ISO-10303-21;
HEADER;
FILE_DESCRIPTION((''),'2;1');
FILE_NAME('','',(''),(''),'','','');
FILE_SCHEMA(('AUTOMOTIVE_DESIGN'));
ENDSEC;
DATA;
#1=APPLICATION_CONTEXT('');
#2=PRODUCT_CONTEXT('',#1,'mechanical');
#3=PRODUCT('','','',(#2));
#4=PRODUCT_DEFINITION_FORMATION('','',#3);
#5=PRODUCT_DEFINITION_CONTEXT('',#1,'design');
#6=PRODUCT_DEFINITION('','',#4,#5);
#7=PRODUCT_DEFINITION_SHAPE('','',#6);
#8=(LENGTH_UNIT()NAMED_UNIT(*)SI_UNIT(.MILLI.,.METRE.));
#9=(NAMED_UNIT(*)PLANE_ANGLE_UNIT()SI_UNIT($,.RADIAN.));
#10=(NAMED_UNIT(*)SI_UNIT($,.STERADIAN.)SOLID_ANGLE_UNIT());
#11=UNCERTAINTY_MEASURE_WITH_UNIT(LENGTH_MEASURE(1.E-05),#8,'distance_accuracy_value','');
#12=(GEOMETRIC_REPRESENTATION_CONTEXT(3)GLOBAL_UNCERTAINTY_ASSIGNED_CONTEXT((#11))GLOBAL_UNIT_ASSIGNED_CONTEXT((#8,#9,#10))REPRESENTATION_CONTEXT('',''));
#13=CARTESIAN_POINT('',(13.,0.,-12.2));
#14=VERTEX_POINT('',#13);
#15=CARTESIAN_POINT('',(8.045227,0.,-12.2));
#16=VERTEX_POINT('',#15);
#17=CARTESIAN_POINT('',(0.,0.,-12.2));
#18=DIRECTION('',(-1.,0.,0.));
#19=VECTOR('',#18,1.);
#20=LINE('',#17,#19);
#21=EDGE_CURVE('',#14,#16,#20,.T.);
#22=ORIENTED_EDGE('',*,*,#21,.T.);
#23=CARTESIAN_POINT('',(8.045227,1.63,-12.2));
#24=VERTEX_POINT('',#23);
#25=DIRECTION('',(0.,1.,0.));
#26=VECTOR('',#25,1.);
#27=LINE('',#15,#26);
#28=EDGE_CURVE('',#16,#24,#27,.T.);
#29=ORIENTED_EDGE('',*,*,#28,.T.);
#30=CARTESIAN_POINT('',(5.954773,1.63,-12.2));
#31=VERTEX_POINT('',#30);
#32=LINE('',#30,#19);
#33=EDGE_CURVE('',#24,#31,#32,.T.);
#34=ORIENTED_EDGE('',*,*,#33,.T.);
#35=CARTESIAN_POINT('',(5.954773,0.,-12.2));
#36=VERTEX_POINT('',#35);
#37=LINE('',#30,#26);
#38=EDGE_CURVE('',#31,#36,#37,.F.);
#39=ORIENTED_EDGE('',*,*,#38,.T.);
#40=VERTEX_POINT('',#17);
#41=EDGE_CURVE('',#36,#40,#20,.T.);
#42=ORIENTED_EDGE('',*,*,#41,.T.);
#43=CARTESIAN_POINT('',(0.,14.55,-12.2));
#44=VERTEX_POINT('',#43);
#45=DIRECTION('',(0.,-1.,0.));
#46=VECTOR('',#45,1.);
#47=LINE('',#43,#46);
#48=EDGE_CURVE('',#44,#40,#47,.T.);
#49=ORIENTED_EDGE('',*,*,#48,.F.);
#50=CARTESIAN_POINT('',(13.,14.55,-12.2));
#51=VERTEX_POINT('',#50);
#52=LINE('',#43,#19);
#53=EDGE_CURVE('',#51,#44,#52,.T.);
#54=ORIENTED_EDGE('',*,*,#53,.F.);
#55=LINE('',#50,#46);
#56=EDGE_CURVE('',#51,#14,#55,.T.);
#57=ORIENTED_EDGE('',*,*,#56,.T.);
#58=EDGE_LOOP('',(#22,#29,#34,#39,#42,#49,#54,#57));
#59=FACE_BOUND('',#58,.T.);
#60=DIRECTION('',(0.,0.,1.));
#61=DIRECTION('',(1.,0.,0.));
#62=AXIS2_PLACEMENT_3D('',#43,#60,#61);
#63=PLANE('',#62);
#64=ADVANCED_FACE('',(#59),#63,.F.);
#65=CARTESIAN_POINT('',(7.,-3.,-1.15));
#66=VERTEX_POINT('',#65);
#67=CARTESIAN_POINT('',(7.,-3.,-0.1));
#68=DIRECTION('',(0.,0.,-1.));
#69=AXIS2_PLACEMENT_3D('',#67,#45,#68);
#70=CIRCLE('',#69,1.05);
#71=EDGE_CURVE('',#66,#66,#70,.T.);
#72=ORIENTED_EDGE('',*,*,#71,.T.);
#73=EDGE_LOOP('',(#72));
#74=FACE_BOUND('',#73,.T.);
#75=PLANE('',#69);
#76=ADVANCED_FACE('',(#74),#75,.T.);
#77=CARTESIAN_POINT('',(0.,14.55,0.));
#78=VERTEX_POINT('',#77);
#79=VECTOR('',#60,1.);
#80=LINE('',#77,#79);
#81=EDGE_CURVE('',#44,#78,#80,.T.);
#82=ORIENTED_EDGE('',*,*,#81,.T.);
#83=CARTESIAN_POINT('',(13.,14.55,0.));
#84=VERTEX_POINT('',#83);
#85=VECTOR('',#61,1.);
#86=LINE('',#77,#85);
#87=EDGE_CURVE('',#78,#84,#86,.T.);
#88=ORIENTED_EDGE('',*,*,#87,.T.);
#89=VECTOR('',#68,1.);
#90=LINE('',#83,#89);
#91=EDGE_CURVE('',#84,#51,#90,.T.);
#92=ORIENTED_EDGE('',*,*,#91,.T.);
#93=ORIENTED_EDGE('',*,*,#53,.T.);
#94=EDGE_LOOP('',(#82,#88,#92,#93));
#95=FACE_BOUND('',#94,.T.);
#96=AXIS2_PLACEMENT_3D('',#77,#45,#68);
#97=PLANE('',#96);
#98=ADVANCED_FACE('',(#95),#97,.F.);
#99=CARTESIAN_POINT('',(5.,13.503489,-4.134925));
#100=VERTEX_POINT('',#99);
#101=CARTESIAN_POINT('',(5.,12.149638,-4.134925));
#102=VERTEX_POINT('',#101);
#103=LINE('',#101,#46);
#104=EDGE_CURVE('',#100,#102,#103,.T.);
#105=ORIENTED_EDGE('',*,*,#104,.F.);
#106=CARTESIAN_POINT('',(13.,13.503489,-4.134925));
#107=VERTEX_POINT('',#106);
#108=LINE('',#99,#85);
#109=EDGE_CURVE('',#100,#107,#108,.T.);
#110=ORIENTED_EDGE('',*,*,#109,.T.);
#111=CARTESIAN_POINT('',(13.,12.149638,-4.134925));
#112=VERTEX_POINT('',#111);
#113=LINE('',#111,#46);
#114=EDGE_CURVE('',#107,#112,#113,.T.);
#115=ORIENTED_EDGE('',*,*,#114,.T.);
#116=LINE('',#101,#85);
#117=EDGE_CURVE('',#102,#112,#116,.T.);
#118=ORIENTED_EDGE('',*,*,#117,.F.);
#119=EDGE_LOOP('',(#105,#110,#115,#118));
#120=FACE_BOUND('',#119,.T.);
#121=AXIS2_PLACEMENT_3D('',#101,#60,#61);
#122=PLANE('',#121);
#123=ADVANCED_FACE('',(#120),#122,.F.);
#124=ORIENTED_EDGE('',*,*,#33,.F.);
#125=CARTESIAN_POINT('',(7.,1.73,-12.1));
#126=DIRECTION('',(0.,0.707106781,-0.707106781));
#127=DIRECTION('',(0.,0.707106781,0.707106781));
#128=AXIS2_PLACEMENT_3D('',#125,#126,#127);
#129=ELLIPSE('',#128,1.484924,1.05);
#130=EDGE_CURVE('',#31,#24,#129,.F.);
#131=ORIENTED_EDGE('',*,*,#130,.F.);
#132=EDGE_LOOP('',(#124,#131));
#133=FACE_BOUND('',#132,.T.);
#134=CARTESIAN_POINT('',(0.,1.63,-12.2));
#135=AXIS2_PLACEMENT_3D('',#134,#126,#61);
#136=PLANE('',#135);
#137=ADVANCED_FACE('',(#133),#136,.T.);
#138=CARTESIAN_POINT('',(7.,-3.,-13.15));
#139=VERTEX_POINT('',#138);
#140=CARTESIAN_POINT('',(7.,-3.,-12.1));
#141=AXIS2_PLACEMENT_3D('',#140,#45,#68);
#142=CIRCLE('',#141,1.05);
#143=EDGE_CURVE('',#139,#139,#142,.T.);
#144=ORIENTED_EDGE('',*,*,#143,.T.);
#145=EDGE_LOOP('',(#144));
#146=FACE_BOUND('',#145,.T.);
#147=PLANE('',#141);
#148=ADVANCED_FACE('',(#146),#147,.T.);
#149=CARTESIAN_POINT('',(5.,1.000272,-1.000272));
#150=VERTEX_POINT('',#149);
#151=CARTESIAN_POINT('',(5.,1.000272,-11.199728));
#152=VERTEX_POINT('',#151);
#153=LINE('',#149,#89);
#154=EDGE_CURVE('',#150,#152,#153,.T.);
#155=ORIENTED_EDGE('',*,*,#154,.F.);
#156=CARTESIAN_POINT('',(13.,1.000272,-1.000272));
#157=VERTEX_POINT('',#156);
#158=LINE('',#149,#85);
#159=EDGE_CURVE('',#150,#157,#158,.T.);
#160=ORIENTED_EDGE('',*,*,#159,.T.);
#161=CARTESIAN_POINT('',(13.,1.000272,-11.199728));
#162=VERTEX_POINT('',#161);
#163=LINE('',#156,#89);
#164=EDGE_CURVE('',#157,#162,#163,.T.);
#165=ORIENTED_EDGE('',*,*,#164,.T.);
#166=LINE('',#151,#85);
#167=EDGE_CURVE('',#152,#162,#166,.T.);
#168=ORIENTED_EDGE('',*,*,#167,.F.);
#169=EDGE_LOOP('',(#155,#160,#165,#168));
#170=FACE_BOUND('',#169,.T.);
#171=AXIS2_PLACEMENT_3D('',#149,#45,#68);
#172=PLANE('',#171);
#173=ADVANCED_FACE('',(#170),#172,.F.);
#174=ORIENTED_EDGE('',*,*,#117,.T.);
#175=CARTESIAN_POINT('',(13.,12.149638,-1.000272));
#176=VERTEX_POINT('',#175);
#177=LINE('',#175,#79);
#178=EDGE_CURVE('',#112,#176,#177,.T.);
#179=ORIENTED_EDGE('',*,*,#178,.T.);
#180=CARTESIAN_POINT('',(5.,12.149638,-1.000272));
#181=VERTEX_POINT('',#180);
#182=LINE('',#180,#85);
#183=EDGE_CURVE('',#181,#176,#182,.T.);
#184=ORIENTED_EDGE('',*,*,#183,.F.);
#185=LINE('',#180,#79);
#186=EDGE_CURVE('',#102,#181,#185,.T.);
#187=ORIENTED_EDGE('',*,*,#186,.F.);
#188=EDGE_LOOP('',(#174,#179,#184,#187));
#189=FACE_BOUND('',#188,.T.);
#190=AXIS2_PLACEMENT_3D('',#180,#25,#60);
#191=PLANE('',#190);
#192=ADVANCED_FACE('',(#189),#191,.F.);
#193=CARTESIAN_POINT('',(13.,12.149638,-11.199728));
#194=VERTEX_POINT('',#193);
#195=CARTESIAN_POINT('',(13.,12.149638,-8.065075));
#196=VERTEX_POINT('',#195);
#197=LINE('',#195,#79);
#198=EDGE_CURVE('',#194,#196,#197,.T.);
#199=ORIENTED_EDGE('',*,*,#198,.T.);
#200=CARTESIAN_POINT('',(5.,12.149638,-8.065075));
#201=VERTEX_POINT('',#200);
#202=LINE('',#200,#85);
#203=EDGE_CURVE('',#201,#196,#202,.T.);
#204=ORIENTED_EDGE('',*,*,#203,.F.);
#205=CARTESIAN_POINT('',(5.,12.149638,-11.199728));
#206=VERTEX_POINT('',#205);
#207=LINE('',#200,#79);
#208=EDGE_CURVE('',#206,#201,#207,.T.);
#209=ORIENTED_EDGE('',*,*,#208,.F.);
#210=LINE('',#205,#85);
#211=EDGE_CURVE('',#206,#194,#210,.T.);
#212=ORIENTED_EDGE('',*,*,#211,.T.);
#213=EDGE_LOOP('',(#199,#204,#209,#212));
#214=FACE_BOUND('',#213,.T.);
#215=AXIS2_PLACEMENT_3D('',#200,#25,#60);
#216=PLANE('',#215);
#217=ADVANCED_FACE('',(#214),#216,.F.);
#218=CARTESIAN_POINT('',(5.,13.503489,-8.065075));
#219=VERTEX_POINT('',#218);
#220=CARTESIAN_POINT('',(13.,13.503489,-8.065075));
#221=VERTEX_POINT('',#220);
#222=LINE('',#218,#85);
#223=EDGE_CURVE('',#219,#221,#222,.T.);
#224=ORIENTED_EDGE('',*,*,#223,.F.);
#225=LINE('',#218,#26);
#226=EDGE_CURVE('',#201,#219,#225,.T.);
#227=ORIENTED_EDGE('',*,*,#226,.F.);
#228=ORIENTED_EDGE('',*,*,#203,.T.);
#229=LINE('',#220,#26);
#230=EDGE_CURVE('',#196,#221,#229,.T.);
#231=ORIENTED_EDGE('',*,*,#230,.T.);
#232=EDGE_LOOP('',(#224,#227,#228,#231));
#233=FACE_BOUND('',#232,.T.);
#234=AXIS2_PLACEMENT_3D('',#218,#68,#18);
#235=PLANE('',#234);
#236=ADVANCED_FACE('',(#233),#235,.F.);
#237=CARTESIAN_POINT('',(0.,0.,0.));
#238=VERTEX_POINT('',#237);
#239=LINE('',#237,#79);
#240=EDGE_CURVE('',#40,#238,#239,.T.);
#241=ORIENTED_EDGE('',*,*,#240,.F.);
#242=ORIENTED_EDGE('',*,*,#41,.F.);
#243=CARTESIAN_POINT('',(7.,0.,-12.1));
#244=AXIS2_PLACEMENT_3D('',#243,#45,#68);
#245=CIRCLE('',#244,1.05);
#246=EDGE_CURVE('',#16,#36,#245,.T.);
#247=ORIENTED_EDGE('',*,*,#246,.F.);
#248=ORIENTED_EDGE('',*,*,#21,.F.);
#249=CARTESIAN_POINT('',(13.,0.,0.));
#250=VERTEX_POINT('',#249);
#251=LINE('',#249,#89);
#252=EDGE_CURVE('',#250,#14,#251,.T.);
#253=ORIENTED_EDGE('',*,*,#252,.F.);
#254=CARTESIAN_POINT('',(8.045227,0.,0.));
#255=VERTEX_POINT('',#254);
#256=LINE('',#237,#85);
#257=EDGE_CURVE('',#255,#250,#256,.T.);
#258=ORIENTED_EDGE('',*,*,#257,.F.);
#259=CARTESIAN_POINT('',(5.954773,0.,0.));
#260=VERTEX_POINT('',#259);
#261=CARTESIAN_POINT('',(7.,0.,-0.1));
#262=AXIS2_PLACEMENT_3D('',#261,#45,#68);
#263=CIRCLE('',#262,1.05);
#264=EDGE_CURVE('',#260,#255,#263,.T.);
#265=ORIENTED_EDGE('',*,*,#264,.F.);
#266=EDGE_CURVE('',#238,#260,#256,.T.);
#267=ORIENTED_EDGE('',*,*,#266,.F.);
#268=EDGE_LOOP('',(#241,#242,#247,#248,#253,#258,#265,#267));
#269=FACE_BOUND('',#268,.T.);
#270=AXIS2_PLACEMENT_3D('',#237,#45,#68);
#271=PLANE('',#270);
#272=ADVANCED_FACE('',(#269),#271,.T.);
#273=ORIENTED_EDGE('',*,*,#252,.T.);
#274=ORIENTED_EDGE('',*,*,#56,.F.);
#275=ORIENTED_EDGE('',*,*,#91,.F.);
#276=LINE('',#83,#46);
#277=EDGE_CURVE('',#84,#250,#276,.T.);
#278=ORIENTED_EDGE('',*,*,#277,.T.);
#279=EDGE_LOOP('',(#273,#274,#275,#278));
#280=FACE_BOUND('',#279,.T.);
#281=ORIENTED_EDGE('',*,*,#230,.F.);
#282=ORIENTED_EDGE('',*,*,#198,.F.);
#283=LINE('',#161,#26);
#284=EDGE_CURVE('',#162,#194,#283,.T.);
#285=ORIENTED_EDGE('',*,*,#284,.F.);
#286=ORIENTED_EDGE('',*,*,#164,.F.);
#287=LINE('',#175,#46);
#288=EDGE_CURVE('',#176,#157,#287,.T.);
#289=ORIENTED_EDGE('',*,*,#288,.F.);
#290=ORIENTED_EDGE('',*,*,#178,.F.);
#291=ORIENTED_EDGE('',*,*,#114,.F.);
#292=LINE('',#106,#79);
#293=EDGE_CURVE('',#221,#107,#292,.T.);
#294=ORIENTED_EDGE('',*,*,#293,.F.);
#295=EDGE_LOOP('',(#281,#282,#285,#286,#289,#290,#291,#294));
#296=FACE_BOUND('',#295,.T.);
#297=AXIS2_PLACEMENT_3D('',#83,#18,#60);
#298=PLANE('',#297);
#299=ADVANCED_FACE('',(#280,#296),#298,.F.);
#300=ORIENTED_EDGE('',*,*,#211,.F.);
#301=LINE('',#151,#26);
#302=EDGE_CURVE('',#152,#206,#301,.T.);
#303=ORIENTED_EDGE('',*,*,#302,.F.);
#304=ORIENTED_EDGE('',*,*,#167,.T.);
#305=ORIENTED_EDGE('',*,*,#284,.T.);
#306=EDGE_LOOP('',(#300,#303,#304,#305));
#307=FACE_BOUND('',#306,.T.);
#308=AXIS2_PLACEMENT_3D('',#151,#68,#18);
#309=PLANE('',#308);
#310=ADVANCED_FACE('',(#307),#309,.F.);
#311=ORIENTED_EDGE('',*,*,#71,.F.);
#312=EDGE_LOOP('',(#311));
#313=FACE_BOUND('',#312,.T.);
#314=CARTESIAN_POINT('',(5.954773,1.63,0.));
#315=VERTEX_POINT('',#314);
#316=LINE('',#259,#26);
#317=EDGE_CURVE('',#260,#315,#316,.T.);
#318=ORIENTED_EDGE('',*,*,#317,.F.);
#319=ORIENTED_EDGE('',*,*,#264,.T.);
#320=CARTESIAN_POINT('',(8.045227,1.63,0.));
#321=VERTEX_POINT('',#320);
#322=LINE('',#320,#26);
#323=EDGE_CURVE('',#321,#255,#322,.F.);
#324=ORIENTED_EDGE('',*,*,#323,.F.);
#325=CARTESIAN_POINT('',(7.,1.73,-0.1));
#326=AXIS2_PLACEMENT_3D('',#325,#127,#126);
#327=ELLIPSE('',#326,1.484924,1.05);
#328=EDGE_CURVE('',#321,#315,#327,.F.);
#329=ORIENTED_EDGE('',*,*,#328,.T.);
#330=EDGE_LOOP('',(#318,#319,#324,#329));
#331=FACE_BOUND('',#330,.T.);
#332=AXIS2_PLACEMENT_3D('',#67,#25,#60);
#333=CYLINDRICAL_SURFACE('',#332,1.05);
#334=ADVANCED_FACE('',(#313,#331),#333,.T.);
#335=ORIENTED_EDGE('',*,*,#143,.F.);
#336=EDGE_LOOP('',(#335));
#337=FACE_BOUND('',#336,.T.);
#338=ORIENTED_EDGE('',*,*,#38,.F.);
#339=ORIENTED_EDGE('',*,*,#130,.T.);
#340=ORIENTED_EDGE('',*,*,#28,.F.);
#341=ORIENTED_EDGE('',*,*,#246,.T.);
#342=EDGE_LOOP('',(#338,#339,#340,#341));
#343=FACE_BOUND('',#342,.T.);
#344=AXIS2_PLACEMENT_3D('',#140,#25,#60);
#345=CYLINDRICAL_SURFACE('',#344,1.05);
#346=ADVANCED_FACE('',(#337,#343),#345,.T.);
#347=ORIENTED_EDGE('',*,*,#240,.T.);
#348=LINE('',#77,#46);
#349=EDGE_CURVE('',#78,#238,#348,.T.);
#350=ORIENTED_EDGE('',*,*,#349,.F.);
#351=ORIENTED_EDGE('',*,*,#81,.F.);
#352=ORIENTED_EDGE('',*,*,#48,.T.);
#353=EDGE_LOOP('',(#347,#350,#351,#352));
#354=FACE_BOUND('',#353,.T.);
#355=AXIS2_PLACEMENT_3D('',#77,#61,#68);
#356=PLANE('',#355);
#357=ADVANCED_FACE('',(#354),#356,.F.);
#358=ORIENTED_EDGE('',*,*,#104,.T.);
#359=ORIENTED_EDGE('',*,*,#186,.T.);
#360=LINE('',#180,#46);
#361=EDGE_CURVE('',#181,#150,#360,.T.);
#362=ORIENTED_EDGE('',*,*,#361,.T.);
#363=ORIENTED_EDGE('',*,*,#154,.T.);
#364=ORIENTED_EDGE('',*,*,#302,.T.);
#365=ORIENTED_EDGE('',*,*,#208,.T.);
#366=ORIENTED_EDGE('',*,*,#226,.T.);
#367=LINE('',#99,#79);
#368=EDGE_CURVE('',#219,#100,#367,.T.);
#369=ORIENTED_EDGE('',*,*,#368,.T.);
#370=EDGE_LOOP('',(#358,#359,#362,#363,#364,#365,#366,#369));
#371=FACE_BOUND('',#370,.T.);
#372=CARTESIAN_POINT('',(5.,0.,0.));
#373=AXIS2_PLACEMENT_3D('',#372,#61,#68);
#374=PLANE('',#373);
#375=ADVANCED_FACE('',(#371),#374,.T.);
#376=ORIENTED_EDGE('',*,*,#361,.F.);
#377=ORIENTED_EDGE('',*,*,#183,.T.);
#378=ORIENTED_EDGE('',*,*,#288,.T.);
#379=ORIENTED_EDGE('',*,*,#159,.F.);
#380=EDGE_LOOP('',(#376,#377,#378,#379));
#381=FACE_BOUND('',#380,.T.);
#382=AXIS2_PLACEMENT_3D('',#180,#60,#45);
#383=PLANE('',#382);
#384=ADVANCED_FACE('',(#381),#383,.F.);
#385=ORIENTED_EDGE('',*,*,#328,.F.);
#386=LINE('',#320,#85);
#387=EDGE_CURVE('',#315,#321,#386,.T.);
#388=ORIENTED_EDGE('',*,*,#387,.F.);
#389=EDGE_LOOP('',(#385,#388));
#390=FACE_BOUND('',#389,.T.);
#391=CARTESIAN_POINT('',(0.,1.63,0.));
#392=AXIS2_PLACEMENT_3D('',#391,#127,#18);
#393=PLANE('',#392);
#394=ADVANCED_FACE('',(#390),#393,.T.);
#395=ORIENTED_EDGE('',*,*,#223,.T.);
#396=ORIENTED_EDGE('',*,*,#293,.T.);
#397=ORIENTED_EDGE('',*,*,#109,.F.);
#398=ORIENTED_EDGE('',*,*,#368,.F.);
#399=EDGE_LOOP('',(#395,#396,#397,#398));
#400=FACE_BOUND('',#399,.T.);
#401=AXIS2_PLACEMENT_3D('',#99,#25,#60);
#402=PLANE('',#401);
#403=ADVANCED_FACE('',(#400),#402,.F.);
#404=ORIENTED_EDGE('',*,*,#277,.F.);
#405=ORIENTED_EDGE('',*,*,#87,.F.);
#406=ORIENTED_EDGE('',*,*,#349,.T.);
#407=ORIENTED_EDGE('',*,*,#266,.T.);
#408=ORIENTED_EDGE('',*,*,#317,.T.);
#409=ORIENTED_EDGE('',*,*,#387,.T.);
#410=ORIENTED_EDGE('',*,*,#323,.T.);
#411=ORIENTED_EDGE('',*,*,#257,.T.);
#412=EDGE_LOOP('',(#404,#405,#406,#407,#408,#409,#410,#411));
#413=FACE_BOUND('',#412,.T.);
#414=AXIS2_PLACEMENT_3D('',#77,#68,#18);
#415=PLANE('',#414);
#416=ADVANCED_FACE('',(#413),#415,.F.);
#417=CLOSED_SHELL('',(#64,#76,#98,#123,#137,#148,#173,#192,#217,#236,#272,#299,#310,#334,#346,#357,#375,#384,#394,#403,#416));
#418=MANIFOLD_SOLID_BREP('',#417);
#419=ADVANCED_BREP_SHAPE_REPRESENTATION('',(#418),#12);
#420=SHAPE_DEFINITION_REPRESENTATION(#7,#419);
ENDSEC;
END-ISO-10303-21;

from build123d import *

# Parameters (mm, degrees)
SKETCH1_W           = 13
SKETCH1_H           = 12.2
BOSS_EXTRUDE1_DEPTH = 14.55
SKETCH2_R           = 1.05
BOSS_EXTRUDE2_DEPTH = 3
CUT_EXTRUDE1_DEPTH  = 8
CHAMFER1_SIZE       = 1.63


with BuildPart() as part:
    # Sketch1 → Boss-Extrude1 (new body)
    with BuildSketch(Plane(origin=(0, 0, 0), x_dir=(1, 0, 0), z_dir=(0, 1, 0))):
        with Locations((6.5, 6.1)):
            Rectangle(SKETCH1_W, SKETCH1_H)
    extrude(amount=BOSS_EXTRUDE1_DEPTH)

    # Sketch2 → Boss-Extrude2 (add)
    with BuildSketch(Plane.XZ):
        with Locations(Location((7, -0.1, 0), (0, 0, 174.5349762))):
            Circle(SKETCH2_R)
        with Locations(Location((7, -12.1, 0), (0, 0, 354.5349762))):
            Circle(SKETCH2_R)
    extrude(amount=BOSS_EXTRUDE2_DEPTH)

    # Sketch3 → Cut-Extrude1 (cut)
    with BuildSketch(Plane(origin=(13, 0, 0), x_dir=(0, 0, -1), z_dir=(1, 0, 0))):
        Polygon((1.000271868, 12.149637893), (1.000271868, 1.000271868), (11.199728132, 1.000271868), (11.199728132, 12.149637893), (8.065074736, 12.149637893), (8.065074736, 13.503489481), (4.134925264, 13.503489481), (4.134925264, 12.149637893), align=None)
    extrude(amount=-CUT_EXTRUDE1_DEPTH, mode=Mode.SUBTRACT)

    # Chamfer1
    # the kernel refuses this chamfer: 1.63 mm, written as the material it adds along each edge
    with BuildSketch(Plane(origin=(1.762929482, 0, 0), x_dir=(0, 0.9996219169112968, -0.027495876610586376), z_dir=(1, 0, 0))) as chamfer1_piece_1_section:
        Polygon((CHAMFER1_SIZE * 0.999621916911, CHAMFER1_SIZE * 0.0274958766106), (-CHAMFER1_SIZE * 0.0274958766106, CHAMFER1_SIZE * 0.999621916911), (0, 0), align=None)
    chamfer1_piece_1 = extrude(amount=10.474141037, mode=Mode.PRIVATE)
    chamfer1_piece_1 = chamfer1_piece_1 & Plane(origin=(7, 0.64054065, -0.1), x_dir=(-0.9954545219220755, 0, 0.09523809523973083), z_dir=(0, 1, 0)) * Cylinder(1.05, 28, mode=Mode.PRIVATE)
    add(chamfer1_piece_1)
    with BuildSketch(Plane(origin=(12.237070518, 0, -12.2), x_dir=(0, 0.9996219169112968, 0.02749587661058688), z_dir=(-1, 0, 0))) as chamfer1_piece_2_section:
        Polygon((CHAMFER1_SIZE * 0.999621916911, CHAMFER1_SIZE * 0.0274958766106), (-CHAMFER1_SIZE * 0.0274958766106, CHAMFER1_SIZE * 0.999621916911), (0, 0), align=None)
    chamfer1_piece_2 = extrude(amount=10.474141037, mode=Mode.PRIVATE)
    chamfer1_piece_2 = chamfer1_piece_2 & Plane(origin=(7, 0.64054065, -12.1), x_dir=(0.9954545219220756, 0, -0.09523809523973051), z_dir=(0, 1, 0)) * Cylinder(1.05, 28, mode=Mode.PRIVATE)
    add(chamfer1_piece_2)


solid = part.part
